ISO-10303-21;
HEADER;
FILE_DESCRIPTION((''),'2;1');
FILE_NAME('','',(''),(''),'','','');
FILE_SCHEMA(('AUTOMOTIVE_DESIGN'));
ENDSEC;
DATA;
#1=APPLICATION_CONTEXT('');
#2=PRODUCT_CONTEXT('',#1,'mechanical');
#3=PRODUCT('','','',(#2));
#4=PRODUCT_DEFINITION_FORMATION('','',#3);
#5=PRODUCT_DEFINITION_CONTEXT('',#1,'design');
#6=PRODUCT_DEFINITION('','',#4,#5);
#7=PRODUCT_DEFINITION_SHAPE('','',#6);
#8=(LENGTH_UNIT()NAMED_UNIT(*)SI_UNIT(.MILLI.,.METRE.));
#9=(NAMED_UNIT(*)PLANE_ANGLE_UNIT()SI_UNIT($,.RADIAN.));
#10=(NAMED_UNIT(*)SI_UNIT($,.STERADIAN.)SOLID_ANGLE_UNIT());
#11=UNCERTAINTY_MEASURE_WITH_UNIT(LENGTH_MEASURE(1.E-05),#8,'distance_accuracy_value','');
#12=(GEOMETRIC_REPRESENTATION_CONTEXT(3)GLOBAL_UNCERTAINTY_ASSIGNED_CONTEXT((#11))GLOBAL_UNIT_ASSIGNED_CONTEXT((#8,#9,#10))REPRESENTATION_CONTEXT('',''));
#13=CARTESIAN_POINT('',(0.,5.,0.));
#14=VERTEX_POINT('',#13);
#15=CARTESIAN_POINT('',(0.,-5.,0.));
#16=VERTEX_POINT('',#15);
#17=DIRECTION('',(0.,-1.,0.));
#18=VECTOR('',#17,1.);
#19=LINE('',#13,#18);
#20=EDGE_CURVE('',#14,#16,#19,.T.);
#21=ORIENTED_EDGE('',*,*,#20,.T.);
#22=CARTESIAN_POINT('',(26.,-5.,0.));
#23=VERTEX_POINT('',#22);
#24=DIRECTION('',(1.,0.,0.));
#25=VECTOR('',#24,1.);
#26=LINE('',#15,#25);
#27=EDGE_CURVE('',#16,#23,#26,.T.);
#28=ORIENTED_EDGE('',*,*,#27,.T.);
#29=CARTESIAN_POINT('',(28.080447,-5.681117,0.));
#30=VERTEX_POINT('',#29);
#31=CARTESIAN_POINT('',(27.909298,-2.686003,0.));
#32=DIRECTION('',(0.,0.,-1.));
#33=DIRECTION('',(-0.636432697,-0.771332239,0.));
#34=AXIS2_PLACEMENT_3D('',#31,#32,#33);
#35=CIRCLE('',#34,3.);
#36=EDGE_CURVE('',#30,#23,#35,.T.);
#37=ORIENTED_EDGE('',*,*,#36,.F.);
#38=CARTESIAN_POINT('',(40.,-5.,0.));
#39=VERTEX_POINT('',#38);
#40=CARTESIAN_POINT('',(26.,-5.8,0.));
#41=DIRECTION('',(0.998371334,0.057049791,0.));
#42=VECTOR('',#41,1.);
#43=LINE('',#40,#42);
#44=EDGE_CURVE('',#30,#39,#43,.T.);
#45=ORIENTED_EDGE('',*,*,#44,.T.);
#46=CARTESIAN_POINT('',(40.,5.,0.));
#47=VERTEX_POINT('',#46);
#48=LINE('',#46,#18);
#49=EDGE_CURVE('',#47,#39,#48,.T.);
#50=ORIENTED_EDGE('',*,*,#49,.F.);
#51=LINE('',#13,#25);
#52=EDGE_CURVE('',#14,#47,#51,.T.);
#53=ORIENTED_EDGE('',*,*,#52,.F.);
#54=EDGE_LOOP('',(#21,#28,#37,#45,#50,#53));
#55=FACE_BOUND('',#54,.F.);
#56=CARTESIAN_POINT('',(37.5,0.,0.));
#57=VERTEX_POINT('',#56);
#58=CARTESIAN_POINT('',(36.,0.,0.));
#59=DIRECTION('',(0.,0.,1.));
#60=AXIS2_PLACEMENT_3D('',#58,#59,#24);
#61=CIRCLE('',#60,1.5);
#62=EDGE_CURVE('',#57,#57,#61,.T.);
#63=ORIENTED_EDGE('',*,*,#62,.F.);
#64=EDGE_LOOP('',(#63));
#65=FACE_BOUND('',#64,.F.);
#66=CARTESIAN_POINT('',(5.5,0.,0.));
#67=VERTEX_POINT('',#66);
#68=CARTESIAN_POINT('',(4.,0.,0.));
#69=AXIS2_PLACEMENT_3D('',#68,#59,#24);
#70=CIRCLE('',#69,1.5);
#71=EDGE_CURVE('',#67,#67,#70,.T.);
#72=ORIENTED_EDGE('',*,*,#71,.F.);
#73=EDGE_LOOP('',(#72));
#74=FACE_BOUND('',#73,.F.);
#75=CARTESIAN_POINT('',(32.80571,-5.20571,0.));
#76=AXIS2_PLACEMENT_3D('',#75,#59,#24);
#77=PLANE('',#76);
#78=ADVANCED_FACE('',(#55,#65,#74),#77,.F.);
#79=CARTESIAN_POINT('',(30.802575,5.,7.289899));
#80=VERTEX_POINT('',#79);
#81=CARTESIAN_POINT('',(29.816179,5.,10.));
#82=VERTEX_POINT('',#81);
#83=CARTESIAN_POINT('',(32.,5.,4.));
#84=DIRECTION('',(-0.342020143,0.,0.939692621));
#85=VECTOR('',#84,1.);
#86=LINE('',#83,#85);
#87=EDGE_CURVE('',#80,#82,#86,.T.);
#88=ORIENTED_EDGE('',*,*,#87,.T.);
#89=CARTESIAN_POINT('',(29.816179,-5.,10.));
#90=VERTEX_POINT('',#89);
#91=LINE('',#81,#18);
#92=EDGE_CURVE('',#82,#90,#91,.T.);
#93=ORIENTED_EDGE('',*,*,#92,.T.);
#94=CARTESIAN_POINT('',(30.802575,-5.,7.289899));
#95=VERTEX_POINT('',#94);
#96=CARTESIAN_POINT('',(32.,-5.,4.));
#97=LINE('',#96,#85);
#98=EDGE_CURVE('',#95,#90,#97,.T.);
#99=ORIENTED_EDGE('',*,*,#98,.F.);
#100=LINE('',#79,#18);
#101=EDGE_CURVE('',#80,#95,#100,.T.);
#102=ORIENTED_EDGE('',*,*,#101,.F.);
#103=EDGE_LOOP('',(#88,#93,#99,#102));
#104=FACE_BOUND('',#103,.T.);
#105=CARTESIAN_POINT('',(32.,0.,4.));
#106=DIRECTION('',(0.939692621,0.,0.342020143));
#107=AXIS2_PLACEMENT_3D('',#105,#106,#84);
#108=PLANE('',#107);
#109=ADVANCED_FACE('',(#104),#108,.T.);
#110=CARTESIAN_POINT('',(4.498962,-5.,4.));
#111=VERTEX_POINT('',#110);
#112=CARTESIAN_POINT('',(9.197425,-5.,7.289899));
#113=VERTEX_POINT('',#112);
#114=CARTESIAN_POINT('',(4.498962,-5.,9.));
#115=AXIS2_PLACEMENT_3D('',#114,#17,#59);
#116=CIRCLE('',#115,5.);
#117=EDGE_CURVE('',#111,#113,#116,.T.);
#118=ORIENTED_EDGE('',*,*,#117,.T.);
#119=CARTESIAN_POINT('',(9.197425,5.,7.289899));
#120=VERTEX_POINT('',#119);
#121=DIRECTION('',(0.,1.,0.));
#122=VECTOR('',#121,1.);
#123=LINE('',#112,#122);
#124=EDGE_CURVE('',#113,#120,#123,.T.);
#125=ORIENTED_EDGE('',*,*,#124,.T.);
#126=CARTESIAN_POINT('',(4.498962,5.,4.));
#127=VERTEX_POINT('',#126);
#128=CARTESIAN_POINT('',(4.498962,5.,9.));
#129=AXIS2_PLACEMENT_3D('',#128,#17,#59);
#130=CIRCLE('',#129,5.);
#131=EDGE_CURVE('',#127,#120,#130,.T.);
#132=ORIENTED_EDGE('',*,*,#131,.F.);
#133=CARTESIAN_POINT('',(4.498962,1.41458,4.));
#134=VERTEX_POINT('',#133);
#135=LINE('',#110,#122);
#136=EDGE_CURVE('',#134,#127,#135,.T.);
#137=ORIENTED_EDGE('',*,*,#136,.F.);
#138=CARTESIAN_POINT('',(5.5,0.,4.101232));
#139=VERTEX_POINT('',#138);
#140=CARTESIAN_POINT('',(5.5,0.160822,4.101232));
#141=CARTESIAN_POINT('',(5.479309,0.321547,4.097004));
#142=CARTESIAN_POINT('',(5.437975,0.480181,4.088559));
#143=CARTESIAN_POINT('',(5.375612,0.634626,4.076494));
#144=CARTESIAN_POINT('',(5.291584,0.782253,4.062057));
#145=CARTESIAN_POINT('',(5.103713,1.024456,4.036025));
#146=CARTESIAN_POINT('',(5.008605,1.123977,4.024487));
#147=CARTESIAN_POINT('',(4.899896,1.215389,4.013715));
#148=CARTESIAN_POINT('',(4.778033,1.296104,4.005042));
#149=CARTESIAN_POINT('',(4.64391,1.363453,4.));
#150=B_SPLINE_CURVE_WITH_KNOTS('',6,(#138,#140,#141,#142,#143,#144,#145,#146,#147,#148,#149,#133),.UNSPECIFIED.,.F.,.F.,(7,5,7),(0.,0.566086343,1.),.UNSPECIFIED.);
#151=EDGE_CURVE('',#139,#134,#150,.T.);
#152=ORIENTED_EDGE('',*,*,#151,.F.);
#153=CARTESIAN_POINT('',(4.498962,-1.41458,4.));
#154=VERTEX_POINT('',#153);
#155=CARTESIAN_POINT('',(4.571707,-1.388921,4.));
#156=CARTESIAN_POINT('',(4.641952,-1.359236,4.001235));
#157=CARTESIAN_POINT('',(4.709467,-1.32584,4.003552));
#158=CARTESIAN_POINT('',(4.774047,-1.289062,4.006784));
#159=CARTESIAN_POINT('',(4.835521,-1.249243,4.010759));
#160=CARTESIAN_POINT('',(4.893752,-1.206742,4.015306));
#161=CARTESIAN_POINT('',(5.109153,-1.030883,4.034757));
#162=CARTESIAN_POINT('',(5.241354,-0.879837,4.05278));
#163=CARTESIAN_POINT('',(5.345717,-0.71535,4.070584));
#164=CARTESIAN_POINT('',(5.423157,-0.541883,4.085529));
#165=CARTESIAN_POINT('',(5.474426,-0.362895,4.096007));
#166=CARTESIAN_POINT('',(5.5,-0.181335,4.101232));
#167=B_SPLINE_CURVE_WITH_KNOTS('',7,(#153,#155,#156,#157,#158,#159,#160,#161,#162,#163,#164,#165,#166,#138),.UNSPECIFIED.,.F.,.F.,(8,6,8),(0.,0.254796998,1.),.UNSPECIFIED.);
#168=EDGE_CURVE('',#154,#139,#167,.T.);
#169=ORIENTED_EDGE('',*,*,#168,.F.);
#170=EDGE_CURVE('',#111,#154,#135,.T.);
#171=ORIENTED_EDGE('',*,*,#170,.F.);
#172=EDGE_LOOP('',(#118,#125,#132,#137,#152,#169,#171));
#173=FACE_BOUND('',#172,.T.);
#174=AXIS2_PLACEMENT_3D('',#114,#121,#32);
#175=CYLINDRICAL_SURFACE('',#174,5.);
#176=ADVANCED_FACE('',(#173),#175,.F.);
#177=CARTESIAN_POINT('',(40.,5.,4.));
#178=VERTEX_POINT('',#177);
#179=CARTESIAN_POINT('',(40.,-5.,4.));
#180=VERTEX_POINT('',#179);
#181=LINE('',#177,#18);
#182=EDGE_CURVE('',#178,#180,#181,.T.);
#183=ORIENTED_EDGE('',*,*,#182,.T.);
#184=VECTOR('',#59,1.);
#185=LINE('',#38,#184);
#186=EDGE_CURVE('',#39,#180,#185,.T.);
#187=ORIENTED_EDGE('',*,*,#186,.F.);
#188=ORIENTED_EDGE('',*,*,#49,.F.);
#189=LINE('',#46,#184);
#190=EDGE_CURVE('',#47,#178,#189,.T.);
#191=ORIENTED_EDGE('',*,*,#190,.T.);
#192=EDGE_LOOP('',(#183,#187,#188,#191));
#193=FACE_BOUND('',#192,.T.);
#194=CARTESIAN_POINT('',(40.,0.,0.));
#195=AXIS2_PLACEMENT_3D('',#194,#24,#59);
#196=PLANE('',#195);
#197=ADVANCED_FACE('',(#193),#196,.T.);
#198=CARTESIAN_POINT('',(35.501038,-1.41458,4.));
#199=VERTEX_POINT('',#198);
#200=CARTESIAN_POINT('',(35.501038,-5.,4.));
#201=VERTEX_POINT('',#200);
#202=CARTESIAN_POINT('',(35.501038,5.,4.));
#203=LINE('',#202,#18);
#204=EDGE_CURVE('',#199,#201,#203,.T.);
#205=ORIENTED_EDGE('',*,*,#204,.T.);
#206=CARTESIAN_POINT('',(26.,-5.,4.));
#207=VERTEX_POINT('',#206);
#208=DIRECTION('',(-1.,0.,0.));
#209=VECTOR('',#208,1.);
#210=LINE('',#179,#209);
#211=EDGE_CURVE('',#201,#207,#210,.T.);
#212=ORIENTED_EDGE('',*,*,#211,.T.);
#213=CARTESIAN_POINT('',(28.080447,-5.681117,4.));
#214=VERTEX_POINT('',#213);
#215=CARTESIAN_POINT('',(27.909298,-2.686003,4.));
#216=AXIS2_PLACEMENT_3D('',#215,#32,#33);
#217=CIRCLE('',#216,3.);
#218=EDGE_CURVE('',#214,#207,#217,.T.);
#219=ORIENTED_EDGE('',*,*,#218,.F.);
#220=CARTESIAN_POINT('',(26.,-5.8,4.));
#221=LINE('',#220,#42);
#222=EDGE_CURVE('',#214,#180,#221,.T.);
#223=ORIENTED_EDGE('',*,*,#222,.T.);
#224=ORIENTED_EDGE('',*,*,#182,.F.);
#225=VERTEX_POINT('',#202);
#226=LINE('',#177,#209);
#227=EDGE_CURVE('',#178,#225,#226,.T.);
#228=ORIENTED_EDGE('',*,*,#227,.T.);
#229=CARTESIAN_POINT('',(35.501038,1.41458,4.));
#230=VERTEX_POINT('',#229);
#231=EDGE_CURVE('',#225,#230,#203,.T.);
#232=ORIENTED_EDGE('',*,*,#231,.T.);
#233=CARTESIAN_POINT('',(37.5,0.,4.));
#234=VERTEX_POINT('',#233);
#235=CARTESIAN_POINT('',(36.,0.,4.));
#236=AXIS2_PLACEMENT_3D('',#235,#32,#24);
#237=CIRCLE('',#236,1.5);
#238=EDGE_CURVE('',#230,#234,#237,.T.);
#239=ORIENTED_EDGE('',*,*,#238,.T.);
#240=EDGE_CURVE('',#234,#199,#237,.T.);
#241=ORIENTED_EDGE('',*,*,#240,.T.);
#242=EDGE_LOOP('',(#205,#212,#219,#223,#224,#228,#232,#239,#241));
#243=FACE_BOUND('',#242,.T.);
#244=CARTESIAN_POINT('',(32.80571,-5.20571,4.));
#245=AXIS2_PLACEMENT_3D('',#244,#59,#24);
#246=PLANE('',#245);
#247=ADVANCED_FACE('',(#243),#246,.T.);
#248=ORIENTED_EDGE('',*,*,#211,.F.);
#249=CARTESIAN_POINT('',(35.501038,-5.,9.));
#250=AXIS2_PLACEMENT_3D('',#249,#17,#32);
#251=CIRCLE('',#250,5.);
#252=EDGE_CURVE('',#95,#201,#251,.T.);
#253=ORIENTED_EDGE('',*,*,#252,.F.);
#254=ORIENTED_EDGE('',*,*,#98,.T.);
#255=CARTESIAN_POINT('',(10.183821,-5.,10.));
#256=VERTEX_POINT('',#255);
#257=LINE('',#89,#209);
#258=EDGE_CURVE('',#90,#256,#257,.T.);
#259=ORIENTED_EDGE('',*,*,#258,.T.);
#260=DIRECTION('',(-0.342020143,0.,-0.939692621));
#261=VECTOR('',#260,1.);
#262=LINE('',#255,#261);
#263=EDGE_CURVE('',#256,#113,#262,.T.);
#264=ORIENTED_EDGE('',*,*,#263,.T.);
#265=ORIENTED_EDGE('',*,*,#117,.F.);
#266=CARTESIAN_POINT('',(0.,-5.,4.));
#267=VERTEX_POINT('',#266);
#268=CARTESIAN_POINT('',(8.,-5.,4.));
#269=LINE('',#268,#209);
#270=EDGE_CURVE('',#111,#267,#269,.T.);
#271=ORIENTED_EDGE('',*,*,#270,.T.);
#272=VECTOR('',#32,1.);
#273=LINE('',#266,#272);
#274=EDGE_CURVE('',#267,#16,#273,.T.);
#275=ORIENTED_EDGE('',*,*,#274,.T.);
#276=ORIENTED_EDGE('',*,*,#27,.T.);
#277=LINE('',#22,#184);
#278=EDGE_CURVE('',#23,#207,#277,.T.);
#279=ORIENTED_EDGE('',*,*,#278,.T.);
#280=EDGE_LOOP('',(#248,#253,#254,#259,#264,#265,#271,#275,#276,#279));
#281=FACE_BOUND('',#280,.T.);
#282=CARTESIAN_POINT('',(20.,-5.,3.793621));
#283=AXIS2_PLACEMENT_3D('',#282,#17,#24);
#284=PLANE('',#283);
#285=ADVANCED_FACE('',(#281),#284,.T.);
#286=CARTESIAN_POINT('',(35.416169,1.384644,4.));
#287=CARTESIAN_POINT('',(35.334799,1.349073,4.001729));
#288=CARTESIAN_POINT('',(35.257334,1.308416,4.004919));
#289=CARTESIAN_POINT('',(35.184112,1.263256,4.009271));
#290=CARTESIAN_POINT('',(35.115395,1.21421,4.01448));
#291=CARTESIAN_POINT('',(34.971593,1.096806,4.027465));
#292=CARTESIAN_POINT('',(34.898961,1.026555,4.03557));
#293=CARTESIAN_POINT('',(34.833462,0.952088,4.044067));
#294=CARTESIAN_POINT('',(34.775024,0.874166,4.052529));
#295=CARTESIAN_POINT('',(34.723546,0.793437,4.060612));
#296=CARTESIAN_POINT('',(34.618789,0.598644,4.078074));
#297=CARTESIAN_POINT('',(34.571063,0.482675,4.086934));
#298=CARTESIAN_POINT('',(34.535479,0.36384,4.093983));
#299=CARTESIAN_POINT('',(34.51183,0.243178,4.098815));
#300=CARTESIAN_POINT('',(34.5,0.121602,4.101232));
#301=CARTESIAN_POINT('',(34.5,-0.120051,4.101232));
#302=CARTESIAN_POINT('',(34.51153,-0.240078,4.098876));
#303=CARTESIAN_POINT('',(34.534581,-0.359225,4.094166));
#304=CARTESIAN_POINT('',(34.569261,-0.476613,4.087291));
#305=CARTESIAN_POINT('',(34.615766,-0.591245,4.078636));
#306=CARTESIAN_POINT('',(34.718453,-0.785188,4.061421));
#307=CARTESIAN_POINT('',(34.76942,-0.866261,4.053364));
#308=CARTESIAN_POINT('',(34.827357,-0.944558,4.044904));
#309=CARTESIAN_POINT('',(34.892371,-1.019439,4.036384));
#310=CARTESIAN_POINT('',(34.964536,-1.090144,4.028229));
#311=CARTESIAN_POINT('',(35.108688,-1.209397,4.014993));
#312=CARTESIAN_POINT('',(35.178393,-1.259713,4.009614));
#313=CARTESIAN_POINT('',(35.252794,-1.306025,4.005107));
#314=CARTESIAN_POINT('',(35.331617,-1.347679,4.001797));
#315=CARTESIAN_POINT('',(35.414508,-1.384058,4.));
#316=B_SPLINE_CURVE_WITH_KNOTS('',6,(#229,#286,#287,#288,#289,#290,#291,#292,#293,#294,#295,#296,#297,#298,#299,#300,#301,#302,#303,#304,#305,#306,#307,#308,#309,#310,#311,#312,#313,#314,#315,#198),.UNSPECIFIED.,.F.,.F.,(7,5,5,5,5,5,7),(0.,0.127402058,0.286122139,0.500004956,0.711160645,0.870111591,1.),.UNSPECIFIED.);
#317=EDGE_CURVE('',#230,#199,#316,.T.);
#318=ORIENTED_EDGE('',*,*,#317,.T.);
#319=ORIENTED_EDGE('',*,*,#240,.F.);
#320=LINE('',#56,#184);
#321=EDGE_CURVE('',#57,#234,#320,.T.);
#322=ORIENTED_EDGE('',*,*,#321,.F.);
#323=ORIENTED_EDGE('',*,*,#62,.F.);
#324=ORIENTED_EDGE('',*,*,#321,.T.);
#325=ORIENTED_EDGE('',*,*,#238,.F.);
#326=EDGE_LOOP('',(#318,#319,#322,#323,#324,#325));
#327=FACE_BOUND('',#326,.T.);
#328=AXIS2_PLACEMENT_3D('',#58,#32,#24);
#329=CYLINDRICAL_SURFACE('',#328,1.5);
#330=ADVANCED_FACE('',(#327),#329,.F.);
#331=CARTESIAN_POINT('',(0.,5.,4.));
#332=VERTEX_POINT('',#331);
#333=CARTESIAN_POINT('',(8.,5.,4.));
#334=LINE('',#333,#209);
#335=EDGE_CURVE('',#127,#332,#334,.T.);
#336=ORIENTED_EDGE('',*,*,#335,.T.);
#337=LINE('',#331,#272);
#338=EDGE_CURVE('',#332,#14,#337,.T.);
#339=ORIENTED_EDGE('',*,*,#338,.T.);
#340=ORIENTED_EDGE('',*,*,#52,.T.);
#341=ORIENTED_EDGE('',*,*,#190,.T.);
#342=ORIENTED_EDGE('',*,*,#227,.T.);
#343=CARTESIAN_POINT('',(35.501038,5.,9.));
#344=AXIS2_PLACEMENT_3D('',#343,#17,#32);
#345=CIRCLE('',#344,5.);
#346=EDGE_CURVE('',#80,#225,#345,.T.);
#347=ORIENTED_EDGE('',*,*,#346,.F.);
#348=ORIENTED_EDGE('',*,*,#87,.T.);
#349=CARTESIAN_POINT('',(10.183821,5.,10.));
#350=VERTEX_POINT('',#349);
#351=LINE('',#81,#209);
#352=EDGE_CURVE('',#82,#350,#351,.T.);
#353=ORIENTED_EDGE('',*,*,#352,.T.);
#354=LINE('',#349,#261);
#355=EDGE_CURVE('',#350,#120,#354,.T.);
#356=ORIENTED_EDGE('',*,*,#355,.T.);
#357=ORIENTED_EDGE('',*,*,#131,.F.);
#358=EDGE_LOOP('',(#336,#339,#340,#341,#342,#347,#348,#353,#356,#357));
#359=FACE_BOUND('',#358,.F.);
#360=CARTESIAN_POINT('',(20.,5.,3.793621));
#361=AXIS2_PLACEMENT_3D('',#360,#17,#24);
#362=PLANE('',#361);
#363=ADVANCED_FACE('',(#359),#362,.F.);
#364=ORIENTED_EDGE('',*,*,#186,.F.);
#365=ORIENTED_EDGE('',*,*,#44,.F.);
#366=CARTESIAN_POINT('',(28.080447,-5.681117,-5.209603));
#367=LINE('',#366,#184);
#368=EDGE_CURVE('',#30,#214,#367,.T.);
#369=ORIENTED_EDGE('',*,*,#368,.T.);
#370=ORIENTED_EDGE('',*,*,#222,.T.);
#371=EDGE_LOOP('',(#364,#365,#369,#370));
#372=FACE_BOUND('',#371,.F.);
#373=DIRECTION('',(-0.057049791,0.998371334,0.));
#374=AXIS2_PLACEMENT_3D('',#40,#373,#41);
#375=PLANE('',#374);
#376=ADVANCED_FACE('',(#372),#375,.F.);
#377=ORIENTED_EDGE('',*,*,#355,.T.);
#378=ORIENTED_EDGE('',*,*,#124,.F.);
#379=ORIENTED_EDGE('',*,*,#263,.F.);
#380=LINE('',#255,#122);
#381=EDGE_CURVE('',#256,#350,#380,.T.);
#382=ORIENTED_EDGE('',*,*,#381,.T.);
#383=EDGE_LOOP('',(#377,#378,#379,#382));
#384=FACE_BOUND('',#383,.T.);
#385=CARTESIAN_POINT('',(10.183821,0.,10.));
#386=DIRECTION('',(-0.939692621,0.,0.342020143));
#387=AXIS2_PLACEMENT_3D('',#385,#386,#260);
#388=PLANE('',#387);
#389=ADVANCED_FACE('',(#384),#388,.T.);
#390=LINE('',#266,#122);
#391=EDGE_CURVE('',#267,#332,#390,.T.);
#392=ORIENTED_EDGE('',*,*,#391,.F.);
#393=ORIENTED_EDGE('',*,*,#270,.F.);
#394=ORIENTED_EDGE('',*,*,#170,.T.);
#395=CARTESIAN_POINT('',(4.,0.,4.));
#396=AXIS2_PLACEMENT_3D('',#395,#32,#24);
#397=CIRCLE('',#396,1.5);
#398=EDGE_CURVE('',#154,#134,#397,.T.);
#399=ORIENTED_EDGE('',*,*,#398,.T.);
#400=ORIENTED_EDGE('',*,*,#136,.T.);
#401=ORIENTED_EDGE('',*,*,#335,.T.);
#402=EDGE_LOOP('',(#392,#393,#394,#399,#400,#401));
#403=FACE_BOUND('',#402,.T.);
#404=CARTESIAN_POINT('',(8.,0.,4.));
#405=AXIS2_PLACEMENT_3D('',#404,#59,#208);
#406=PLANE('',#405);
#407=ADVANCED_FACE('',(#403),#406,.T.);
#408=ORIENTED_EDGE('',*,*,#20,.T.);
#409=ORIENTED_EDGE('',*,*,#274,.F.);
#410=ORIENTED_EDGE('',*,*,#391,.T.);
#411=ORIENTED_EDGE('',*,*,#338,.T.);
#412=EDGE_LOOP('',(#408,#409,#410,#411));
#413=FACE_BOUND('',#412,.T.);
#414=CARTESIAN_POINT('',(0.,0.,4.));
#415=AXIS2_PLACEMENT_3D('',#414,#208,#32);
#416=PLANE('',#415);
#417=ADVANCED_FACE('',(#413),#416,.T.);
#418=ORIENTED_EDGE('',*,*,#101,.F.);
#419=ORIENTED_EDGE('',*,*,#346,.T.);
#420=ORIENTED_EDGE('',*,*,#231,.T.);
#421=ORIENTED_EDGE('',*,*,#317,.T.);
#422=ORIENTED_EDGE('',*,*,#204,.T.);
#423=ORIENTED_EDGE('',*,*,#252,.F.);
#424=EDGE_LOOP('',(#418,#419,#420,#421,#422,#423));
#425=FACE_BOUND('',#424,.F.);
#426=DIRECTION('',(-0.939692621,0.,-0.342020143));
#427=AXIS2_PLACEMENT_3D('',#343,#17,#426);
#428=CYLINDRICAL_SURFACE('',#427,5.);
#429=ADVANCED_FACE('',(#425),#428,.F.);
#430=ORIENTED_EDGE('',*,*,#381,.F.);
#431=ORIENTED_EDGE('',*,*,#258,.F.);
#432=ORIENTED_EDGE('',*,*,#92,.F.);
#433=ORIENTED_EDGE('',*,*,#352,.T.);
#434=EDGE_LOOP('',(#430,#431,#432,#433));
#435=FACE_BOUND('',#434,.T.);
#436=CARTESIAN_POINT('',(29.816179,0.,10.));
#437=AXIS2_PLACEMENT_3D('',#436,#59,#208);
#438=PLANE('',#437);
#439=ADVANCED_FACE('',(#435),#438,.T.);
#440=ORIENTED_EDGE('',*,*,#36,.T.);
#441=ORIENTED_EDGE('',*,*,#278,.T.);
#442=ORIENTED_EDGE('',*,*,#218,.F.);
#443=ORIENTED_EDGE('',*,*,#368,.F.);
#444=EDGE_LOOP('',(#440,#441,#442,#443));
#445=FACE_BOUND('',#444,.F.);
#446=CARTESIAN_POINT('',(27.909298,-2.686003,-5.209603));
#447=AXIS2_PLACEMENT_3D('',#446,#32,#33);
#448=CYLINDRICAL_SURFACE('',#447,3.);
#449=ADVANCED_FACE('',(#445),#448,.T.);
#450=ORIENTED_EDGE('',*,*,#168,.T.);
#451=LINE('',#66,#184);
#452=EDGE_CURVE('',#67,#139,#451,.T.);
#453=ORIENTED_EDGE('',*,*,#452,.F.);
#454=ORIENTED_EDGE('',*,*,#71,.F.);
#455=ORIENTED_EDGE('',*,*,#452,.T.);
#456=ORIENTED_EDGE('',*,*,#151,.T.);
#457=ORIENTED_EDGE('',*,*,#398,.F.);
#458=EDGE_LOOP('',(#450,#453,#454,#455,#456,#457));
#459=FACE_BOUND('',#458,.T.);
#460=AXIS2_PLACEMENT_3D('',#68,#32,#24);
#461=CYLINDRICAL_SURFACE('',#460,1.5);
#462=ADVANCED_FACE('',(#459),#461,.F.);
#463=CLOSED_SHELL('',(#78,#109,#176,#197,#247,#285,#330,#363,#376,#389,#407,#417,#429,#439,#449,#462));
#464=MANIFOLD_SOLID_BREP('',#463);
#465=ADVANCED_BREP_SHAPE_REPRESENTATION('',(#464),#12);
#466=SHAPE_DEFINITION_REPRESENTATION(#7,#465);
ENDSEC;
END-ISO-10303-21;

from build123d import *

# Parameters (mm, degrees)
F1_DEPTH    = 5
F2_R        = 5
F3_R        = 1.5
F4_DEPTH    = 25
F6_DEPTH    = 4
F7_T1_DEPTH = 14.4192067173


# Not quite as in the source:
# - a fillet or chamfer that OpenCascade refuses, or shapes differently, is made with other operations: its cross-section is extruded or revolved along the edge and cut away or added


with BuildPart() as f1:
    # F0 (on Front) → F1 (new body, symmetric)
    with BuildSketch(Plane.XZ):
        Polygon((0, 4), (0, 0), (40, 0), (40, 4), (32, 4), (29.8161785944, 10), (10.1838214056, 10), (8, 4), align=None)
    extrude(amount=F1_DEPTH, both=True)

    # F2
    f2_edges = [f1.edges().sort_by_distance(p)[0] for p in [
        (32, 0, 4),
        (8, 0, 4),
    ]]
    fillet(f2_edges, radius=F2_R)

    # F3 (on Top) → F4 (cut)
    with BuildSketch(Plane.XY):
        with Locations((4, 0)):
            Circle(F3_R)
        with Locations((36, 0)):
            Circle(F3_R)
    extrude(amount=F4_DEPTH, mode=Mode.SUBTRACT)

    # F5 (on Top) → F6 (join)
    with BuildSketch(Plane.XY):
        Polygon((26, -5.8), (40, -5), (26, -5), align=None)
    extrude(amount=F6_DEPTH)

    # F7: fillet of radius 3 on 1 edges, made by hand

    # F7_s2 → F7_t1 (cut)
    with BuildSketch(Plane.XY.offset(-5.2096033586)):
        with BuildLine():
            ThreePointArc((26, -5), (26.9758794109, -5.5370959816), (28.0804474628, -5.6811172878))
            Line((28.0804474628, -5.6811172878), (26, -5.8))
            Line((26, -5.8), (26, -5))
        make_face()
    extrude(amount=F7_T1_DEPTH, mode=Mode.SUBTRACT)


solid = f1.part
